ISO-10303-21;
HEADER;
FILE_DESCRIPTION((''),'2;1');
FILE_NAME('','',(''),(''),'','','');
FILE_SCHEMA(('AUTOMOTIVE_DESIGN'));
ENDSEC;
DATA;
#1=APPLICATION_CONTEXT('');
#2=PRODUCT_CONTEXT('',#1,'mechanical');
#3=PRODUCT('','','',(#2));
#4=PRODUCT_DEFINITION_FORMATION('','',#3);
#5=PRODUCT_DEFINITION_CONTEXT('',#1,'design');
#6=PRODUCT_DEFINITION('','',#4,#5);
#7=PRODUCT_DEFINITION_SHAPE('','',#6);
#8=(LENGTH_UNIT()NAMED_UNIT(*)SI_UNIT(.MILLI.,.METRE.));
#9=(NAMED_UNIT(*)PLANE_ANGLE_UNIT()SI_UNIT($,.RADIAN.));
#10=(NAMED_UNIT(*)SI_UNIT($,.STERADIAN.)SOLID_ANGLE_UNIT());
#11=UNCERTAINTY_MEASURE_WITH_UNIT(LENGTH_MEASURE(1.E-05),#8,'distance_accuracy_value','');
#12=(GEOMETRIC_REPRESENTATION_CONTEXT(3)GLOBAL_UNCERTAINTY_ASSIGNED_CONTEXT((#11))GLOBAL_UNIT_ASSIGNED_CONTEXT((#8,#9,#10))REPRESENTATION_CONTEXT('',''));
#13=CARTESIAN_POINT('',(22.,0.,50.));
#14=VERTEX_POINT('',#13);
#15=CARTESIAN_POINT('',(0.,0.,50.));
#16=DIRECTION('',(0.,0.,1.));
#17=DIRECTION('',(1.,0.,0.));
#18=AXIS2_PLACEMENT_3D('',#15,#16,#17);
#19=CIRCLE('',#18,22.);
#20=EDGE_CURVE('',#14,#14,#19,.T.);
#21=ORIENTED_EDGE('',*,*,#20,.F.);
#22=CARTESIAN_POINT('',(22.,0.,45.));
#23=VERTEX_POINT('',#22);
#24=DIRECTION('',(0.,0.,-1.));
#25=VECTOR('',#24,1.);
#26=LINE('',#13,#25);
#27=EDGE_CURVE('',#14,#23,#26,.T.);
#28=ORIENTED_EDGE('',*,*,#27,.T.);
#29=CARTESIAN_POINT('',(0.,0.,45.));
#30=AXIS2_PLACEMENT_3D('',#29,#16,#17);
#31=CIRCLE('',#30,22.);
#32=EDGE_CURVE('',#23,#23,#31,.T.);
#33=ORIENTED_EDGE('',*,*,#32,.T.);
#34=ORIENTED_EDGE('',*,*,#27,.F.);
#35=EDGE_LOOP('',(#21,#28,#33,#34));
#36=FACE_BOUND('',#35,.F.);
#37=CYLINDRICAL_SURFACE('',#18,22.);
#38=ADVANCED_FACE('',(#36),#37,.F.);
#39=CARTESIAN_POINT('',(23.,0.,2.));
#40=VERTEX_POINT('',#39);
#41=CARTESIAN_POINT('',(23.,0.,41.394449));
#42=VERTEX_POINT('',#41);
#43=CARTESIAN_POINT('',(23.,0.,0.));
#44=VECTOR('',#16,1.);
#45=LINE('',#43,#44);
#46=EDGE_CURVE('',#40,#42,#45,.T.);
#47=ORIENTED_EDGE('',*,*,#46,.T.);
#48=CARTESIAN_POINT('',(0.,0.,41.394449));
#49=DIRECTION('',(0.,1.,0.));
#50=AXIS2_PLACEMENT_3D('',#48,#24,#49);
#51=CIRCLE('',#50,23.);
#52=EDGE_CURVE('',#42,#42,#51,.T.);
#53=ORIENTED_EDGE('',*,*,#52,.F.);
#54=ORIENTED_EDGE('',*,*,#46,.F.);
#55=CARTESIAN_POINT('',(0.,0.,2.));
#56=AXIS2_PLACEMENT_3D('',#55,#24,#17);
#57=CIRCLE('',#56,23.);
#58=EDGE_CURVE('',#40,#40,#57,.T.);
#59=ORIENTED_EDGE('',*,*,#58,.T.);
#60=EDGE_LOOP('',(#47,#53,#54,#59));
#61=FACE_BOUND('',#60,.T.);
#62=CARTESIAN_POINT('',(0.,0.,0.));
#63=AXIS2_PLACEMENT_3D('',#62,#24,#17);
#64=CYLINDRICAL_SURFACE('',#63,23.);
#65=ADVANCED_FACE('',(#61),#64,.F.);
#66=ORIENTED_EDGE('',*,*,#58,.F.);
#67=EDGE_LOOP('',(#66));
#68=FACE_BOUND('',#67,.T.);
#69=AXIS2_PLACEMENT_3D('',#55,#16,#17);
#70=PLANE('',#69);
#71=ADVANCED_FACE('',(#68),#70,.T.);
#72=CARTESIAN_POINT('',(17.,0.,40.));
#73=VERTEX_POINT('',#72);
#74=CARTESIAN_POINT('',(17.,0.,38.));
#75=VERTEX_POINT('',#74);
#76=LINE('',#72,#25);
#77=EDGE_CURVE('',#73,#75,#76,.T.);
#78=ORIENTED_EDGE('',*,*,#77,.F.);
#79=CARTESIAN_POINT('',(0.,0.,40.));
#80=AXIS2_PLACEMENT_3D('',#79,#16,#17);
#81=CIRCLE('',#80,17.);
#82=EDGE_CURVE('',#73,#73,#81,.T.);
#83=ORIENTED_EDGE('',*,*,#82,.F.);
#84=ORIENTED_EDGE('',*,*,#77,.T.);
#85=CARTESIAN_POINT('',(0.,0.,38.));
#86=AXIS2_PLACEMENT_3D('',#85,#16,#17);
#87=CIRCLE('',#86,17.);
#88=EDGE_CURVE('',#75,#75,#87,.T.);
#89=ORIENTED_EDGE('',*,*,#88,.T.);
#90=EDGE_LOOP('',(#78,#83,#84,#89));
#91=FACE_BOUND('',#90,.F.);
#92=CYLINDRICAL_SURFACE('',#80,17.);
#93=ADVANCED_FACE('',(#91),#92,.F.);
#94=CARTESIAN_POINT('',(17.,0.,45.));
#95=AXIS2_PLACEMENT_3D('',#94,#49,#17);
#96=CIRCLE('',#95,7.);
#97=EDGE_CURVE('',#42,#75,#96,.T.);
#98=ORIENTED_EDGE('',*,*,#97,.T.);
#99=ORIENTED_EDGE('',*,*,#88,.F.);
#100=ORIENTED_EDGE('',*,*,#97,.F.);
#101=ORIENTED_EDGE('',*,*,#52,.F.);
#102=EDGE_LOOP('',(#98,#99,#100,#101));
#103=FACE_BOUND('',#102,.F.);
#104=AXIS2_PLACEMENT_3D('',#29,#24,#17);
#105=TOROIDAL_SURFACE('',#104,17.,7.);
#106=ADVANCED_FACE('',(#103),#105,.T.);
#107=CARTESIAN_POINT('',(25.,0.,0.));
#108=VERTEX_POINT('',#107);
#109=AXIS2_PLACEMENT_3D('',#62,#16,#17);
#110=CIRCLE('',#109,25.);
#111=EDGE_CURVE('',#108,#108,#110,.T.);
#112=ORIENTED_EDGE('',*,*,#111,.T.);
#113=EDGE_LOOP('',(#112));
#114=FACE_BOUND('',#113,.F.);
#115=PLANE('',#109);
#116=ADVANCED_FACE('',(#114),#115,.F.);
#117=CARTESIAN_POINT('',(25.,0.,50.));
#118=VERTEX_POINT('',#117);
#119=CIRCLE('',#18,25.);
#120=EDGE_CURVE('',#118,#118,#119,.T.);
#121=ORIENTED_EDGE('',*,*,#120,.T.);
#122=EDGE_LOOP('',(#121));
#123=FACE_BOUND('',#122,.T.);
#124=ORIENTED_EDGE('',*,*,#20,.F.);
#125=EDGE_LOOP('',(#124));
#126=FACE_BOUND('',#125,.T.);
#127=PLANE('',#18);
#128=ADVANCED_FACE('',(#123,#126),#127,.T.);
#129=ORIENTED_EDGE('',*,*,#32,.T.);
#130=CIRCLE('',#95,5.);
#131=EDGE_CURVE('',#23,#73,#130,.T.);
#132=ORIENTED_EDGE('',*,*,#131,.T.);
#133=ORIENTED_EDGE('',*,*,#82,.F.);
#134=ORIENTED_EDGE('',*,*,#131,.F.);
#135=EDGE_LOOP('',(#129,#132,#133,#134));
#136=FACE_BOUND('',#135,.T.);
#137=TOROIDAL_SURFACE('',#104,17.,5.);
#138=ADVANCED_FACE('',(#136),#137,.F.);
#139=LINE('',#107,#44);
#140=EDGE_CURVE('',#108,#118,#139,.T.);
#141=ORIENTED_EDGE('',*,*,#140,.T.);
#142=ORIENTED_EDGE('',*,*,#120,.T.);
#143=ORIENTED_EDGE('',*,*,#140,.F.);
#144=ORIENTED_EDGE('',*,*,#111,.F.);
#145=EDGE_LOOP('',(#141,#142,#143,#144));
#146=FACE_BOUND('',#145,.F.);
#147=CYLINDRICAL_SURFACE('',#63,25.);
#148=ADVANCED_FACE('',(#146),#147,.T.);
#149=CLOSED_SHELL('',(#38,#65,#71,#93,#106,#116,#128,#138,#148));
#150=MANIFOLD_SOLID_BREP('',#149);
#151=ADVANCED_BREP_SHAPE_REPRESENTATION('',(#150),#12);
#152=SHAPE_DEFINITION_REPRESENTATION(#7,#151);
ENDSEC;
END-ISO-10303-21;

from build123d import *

# Parameters (mm, degrees)
F0_R     = 25
F1_DEPTH = 50
F2_R     = 22
F3_DEPTH = 10
F4_R     = 5
F5_T     = 2


# Not quite as in the source:
# - a shell that OpenCascade refuses in one call is made with other operations: the cavity is built on its own and cut out


with BuildPart() as f1:
    # F0 (on Top) → F1 (new body)
    with BuildSketch(Plane.XY):
        Circle(F0_R)
    extrude(amount=F1_DEPTH)

    # F2 (on face) → F3 (cut)
    with BuildSketch(Plane.XY.offset(50)):
        Circle(F2_R)
    extrude(amount=-F3_DEPTH, mode=Mode.SUBTRACT)

    # F4
    f4_edges = [f1.edges().sort_by_distance(p)[0] for p in [
        (-22, 0, 40),
    ]]
    fillet(f4_edges, radius=F4_R)

    # F5: shell of thickness 2, made by hand


with BuildPart() as f5_core1:
    # F5_t2: copy of F1
    add(f1.part)

    # the walls: a layer under each face that stays
    f5_faces = [f5_core1.faces().sort_by_distance(p)[0] for p in [
        (-22, 0, 47.5),
        (-20.5355339059, 0, 41.4644660941),
        (-16.6666666667, -16.6666666667, 50),
        (-25, 0, 25),
        (0, 0, 0),
    ]]
    thicken(f5_faces, amount=-F5_T, mode=Mode.SUBTRACT)


with BuildPart() as f1_1:
    add(f1.part)

    # what is left inside the walls is the cavity
    f5_cavity = [f5_core1.part.solids().sort_by_distance(p)[0] for p in [
        (-22.98, 0, 28.262966),
    ]]
    add(f5_cavity, mode=Mode.SUBTRACT)


solid = f1_1.part
